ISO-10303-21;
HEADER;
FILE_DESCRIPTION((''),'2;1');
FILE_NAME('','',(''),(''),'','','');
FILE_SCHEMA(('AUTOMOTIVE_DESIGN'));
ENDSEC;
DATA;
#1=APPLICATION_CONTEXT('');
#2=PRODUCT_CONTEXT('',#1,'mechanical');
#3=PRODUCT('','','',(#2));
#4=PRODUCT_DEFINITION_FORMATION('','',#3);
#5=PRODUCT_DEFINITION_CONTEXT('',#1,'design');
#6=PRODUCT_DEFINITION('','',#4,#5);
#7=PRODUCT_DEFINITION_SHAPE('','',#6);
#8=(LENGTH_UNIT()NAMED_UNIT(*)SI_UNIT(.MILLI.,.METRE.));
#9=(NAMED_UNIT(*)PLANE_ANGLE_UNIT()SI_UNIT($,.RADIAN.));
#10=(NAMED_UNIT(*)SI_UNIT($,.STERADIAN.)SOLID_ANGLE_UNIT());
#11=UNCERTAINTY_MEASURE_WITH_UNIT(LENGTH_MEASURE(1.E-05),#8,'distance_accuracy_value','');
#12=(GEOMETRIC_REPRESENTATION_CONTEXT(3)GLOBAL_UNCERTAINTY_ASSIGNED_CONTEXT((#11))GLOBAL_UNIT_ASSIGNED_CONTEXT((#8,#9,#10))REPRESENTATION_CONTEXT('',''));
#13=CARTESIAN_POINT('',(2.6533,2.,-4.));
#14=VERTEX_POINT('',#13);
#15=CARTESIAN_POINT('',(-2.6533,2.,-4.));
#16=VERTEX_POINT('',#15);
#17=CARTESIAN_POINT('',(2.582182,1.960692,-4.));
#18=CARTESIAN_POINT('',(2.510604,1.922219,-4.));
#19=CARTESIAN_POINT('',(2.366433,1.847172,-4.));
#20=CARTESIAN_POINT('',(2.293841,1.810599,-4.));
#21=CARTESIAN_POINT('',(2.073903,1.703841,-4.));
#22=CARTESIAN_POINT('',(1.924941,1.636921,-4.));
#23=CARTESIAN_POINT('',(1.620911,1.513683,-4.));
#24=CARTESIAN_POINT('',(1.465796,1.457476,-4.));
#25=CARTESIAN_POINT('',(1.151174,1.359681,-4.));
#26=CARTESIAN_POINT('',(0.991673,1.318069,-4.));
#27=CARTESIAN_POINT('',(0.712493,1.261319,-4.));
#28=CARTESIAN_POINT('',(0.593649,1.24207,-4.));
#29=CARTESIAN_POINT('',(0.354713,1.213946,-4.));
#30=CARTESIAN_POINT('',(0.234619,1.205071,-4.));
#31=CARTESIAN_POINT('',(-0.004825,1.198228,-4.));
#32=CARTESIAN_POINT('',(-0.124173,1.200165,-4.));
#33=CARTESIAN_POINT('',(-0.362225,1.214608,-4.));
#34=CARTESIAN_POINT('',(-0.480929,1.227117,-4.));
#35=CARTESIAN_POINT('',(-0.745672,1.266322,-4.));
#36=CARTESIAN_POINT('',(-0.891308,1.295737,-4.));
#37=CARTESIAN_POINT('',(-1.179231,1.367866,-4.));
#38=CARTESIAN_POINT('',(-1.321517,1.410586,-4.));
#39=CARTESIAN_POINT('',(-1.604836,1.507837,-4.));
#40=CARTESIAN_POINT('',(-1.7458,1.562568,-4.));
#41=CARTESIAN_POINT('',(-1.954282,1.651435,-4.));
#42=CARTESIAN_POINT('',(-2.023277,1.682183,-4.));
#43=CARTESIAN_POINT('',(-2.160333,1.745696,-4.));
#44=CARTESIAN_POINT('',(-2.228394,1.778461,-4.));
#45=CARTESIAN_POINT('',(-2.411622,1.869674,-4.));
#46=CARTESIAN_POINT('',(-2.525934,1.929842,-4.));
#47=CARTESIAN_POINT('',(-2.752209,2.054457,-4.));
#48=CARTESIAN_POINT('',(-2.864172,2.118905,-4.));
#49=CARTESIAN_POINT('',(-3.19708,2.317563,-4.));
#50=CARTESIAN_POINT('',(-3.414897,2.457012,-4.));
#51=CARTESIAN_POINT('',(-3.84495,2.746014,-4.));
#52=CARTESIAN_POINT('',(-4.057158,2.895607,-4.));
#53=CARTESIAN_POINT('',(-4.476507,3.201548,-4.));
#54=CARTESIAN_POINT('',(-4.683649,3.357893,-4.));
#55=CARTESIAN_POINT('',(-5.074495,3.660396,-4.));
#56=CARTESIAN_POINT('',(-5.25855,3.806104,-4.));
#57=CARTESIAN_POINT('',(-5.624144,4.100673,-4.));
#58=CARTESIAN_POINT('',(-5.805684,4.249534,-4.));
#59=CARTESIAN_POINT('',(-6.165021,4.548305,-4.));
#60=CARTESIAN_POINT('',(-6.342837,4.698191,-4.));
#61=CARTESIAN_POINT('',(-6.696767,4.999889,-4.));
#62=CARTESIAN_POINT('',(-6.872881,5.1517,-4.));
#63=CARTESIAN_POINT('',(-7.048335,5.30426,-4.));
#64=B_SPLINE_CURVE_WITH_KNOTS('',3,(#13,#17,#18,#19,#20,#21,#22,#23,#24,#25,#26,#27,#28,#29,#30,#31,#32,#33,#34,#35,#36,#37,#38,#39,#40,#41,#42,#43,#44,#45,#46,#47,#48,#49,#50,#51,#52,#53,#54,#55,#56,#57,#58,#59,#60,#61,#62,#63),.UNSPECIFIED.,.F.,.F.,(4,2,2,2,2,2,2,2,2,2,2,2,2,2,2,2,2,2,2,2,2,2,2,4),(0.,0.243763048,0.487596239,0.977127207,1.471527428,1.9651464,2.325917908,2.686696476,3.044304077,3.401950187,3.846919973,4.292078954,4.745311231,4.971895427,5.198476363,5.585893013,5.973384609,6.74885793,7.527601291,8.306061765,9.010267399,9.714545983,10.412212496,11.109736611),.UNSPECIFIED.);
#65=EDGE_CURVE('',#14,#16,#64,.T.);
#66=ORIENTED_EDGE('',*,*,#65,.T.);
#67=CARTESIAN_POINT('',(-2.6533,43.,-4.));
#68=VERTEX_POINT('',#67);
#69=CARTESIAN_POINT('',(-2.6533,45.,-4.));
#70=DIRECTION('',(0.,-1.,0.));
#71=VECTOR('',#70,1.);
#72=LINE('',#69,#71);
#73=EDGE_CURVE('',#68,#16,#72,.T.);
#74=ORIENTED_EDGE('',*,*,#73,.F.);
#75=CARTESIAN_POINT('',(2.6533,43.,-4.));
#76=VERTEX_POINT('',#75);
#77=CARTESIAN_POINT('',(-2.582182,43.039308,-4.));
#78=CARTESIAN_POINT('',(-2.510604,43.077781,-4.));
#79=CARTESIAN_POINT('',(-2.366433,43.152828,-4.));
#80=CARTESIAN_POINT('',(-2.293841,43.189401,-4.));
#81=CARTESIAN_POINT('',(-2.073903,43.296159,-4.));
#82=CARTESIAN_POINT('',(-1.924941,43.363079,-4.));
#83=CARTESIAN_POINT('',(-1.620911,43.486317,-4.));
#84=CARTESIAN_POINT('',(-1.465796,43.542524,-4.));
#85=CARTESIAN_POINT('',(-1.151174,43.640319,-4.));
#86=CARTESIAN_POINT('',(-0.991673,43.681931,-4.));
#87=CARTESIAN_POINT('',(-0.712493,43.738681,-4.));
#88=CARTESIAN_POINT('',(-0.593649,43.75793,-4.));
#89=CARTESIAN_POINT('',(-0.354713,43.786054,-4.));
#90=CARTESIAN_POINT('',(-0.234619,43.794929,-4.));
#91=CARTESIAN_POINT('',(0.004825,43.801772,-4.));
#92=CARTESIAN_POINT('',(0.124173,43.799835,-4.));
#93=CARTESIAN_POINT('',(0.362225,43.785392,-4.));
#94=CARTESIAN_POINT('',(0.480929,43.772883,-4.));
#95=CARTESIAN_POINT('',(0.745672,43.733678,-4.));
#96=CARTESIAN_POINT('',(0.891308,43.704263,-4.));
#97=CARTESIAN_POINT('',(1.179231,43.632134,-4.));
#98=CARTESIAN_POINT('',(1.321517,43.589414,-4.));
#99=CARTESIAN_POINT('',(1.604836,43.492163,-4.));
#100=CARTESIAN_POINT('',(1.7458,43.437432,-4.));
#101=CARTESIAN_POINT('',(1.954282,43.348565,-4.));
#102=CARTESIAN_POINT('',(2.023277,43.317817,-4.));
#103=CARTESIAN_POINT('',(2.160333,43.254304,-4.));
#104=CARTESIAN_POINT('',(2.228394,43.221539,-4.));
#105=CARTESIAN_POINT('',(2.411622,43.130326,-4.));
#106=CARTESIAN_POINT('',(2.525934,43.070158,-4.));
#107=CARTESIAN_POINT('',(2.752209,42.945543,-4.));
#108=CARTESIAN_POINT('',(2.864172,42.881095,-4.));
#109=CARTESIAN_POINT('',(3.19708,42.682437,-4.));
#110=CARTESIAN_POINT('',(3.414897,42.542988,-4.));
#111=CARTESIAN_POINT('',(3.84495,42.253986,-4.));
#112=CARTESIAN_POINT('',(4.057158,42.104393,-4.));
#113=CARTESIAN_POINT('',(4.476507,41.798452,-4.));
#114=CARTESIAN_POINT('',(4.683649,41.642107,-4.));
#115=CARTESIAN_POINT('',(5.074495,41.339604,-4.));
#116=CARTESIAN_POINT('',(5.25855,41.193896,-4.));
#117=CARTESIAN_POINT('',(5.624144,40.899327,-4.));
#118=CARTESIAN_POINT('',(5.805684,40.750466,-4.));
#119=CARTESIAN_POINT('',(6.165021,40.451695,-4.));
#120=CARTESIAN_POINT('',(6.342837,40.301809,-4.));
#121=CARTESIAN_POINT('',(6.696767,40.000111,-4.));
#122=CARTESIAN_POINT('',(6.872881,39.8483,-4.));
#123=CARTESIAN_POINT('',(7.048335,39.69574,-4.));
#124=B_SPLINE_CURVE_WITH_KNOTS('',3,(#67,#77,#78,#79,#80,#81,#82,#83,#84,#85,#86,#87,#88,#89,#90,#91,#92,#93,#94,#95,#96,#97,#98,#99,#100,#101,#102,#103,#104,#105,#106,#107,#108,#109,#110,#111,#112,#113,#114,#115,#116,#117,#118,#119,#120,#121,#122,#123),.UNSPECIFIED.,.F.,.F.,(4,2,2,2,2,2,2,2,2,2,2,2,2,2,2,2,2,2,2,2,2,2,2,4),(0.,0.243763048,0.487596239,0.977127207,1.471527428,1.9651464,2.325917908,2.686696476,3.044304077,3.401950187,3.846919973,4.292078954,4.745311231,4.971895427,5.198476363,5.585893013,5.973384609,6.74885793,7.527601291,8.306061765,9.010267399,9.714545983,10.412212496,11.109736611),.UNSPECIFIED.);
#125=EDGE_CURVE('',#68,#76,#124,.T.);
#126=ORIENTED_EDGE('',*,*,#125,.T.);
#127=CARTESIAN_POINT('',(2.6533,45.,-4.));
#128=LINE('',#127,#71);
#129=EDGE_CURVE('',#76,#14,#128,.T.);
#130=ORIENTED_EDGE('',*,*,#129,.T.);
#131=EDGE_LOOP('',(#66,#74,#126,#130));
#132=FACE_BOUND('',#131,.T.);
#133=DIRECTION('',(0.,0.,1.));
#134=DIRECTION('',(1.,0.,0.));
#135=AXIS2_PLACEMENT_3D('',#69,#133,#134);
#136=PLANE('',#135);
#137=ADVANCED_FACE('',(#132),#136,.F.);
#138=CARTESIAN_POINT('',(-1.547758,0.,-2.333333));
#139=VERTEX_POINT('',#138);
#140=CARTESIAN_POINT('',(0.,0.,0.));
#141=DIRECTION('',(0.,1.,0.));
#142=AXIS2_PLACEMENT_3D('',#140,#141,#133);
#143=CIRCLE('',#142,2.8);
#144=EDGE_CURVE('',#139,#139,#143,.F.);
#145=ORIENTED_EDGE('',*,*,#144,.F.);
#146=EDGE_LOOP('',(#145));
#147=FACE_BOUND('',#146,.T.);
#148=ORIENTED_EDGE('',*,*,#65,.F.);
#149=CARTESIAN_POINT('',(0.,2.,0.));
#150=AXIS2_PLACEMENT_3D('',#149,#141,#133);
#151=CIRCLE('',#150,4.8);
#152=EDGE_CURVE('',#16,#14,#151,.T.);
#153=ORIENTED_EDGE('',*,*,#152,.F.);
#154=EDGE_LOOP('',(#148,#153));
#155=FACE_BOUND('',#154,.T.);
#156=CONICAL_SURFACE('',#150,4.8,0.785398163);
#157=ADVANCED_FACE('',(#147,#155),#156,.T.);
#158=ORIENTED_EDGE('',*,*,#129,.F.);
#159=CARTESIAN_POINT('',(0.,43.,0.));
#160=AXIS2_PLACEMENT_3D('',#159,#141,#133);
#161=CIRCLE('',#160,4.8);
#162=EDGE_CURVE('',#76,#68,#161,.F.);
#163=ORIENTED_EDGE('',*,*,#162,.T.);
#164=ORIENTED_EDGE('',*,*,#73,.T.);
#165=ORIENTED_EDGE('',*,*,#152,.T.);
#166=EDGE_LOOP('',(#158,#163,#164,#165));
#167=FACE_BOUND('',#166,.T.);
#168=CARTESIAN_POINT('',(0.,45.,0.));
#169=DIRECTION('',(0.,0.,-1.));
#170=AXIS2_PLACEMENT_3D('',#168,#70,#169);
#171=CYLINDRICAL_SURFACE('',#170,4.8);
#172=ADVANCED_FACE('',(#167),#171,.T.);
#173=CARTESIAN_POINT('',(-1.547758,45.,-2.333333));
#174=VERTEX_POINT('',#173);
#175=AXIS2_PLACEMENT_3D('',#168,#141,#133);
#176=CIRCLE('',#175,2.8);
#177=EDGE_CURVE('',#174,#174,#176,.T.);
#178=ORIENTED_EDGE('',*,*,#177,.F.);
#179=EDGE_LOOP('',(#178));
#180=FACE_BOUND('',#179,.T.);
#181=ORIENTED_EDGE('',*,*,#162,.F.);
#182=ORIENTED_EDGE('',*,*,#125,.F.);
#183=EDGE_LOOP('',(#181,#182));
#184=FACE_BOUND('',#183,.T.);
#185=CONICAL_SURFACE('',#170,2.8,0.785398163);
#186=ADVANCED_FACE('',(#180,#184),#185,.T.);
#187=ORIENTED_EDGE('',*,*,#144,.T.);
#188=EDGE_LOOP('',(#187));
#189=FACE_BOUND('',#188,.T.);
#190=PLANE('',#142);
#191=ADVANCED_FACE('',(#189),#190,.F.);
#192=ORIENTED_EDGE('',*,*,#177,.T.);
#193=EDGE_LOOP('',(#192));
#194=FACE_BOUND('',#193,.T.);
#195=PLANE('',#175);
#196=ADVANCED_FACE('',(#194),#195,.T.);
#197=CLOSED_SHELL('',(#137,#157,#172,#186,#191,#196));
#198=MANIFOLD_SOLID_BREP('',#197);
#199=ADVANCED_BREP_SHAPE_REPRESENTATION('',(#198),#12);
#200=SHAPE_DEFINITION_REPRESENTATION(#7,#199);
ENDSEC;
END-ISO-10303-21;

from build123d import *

# Parameters (mm, degrees)
BOSS_EXTRUDE1_DEPTH = 45


with BuildPart() as part:
    # Sketch1 → Boss-Extrude1 (new body)
    with BuildSketch(Plane(origin=(0, 0, 0), x_dir=(1, 0, 0), z_dir=(0, 1, 0))):
        with BuildLine():
            Line((-2.653299832, 4), (2.653299832, 4))
            ThreePointArc((2.653299832, 4), (0, -4.8), (-2.653299832, 4))
        make_face()
    extrude(amount=BOSS_EXTRUDE1_DEPTH)

    # Chamfer1: read off the stored shape, not the designer's step
    # Chamfer1 outline → Chamfer1 (revolve, cut)
    with BuildSketch(Plane.XY):
        Polygon((4.800000063, 2.000000063), (2.8, 0), (4.800000063, 0), align=None)
        Polygon((2.8, 45), (4.800000063, 42.999999937), (4.800000063, 45), align=None)
    revolve(axis=Axis((0, 0, 0), (0, 1, 0)), mode=Mode.SUBTRACT)


solid = part.part
